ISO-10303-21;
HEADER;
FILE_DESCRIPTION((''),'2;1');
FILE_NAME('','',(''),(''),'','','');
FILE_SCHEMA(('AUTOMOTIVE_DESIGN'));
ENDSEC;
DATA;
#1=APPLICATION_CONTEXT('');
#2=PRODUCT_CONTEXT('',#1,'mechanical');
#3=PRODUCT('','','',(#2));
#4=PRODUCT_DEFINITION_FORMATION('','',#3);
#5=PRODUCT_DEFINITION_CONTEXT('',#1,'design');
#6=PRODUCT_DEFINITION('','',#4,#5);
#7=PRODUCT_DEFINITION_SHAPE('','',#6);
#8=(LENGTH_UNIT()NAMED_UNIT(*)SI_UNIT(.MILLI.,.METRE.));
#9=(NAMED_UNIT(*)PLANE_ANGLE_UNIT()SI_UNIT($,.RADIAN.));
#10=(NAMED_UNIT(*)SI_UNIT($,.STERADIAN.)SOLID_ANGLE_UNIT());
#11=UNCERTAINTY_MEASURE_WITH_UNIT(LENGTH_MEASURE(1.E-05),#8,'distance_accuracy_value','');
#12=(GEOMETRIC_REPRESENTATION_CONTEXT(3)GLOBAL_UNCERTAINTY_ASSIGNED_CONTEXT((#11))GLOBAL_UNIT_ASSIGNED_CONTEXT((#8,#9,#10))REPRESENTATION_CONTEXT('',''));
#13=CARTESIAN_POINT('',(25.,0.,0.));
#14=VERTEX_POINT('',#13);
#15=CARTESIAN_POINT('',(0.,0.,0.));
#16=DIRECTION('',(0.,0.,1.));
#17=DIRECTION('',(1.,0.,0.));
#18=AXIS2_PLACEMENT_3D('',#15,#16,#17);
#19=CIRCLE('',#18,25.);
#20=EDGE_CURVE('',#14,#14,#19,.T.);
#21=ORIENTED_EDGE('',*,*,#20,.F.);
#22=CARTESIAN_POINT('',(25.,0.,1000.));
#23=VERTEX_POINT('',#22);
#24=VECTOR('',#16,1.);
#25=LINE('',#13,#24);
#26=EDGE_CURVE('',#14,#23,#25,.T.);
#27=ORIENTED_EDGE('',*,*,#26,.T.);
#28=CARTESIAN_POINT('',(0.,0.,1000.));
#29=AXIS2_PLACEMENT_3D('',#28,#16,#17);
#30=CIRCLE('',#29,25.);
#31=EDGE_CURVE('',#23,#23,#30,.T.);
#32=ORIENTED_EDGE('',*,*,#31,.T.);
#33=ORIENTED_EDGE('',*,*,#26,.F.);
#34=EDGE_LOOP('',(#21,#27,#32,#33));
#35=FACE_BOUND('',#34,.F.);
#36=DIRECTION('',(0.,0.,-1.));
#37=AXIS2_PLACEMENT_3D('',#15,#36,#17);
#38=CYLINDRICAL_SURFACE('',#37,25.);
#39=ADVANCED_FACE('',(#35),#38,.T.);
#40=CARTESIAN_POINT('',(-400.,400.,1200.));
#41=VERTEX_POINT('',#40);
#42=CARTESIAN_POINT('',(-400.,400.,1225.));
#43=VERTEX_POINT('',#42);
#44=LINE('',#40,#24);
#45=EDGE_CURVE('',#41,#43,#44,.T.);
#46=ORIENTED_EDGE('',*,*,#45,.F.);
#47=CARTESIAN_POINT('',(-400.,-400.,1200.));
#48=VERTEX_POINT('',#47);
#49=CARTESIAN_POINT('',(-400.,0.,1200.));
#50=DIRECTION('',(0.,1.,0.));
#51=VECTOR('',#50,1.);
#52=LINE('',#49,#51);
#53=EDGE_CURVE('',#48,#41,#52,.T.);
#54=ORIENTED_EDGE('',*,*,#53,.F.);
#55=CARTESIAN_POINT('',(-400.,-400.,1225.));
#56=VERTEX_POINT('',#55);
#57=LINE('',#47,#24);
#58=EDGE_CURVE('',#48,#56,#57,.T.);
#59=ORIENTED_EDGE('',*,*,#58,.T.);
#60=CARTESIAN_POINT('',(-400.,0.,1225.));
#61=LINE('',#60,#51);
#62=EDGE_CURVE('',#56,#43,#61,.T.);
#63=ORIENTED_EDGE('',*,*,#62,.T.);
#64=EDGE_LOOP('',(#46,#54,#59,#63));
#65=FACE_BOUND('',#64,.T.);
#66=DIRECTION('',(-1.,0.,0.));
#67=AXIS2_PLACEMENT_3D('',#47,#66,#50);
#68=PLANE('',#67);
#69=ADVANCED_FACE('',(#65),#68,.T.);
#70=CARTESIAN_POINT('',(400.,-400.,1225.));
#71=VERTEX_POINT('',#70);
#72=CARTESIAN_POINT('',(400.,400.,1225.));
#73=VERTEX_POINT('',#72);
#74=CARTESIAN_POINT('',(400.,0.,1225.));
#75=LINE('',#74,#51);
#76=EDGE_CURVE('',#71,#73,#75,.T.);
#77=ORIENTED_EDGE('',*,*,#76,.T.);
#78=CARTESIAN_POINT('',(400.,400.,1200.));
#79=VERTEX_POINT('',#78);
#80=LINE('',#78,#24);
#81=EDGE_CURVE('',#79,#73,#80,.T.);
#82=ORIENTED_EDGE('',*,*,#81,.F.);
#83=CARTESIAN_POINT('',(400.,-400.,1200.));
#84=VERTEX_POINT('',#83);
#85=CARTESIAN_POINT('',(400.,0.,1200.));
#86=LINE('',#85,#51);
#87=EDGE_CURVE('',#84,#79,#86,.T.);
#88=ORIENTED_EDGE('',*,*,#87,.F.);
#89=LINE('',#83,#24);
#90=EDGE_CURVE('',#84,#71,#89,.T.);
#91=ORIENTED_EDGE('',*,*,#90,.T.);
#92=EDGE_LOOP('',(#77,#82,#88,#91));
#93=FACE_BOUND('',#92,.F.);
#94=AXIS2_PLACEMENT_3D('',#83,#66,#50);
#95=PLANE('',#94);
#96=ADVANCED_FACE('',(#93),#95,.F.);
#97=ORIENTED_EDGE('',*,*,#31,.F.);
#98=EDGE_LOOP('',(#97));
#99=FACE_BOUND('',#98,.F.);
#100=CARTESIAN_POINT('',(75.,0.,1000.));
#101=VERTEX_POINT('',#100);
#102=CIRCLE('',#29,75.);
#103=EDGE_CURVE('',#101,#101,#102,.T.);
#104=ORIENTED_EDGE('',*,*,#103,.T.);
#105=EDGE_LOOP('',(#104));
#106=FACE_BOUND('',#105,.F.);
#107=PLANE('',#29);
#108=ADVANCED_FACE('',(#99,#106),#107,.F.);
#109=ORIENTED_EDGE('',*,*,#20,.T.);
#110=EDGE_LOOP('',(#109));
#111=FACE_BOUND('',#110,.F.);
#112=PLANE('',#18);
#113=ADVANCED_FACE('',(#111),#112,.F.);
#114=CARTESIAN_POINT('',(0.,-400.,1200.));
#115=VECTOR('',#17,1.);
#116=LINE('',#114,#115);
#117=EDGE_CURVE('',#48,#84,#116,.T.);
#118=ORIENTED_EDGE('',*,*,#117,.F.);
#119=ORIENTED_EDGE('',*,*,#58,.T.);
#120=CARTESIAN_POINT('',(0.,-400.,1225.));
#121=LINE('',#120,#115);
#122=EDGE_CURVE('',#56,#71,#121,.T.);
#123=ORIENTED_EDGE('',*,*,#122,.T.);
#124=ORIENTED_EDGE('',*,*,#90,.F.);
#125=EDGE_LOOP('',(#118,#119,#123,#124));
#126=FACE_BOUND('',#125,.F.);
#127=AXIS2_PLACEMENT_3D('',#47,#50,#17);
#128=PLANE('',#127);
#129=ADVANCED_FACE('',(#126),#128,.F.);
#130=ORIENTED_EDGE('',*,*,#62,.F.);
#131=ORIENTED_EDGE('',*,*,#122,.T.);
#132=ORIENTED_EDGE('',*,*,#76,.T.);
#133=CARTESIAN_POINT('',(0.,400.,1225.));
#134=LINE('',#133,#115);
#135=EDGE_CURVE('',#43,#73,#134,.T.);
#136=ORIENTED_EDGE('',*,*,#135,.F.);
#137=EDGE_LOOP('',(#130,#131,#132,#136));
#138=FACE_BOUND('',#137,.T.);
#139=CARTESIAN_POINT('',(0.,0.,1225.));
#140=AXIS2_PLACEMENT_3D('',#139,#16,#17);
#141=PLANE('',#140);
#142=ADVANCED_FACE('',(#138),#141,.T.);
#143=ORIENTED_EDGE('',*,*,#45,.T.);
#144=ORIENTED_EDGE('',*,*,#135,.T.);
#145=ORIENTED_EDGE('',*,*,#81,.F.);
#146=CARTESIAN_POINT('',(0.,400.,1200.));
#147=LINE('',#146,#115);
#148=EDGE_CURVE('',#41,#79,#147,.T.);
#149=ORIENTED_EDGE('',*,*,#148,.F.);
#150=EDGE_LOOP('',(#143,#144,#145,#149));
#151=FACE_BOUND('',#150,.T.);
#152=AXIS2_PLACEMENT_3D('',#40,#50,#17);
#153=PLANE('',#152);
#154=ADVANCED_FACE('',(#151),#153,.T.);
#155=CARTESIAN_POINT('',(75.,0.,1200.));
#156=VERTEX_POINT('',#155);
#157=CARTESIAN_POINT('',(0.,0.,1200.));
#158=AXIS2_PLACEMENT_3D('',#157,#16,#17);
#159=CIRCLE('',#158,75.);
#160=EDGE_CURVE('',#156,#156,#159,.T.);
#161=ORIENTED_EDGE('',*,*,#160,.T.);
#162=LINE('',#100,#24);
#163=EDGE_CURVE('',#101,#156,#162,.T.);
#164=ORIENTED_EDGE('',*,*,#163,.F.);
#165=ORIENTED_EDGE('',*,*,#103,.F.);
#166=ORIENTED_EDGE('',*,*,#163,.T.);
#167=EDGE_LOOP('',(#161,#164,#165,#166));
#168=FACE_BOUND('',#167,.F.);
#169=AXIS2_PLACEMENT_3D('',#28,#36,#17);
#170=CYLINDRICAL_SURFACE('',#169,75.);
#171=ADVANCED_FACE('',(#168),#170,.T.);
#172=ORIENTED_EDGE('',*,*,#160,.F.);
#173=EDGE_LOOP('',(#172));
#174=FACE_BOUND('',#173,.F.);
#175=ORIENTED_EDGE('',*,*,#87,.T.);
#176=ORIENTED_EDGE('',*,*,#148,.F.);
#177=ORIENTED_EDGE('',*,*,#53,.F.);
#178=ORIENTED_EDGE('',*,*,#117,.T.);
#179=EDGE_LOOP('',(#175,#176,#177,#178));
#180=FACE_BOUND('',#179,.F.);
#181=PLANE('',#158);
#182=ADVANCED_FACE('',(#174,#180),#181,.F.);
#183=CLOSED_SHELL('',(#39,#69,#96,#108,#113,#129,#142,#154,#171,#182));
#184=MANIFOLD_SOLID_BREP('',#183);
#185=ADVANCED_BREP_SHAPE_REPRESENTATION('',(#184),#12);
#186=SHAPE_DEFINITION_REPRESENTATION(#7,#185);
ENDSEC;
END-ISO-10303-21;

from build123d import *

# Parameters (mm, degrees)
F0_R     = 25
F1_DEPTH = 1000
F2_R     = 75
F2_R_2   = 25
F3_DEPTH = 200
F4_W     = 800
F4_H     = 800
F5_DEPTH = 25


with BuildPart() as f1:
    # F0 (on Top) → F1 (new body)
    with BuildSketch(Plane.XY):
        Circle(F0_R)
    extrude(amount=F1_DEPTH)

    # F2 (on face) → F3 (join)
    with BuildSketch(Plane.XY.offset(1000)):
        Circle(F2_R)
        Circle(F2_R_2, mode=Mode.SUBTRACT)
        Circle(F2_R_2)
    extrude(amount=F3_DEPTH)

    # F4 (on face) → F5 (join)
    with BuildSketch(Plane.XY.offset(1200)):
        Rectangle(F4_W, F4_H)
    extrude(amount=F5_DEPTH)


solid = f1.part
